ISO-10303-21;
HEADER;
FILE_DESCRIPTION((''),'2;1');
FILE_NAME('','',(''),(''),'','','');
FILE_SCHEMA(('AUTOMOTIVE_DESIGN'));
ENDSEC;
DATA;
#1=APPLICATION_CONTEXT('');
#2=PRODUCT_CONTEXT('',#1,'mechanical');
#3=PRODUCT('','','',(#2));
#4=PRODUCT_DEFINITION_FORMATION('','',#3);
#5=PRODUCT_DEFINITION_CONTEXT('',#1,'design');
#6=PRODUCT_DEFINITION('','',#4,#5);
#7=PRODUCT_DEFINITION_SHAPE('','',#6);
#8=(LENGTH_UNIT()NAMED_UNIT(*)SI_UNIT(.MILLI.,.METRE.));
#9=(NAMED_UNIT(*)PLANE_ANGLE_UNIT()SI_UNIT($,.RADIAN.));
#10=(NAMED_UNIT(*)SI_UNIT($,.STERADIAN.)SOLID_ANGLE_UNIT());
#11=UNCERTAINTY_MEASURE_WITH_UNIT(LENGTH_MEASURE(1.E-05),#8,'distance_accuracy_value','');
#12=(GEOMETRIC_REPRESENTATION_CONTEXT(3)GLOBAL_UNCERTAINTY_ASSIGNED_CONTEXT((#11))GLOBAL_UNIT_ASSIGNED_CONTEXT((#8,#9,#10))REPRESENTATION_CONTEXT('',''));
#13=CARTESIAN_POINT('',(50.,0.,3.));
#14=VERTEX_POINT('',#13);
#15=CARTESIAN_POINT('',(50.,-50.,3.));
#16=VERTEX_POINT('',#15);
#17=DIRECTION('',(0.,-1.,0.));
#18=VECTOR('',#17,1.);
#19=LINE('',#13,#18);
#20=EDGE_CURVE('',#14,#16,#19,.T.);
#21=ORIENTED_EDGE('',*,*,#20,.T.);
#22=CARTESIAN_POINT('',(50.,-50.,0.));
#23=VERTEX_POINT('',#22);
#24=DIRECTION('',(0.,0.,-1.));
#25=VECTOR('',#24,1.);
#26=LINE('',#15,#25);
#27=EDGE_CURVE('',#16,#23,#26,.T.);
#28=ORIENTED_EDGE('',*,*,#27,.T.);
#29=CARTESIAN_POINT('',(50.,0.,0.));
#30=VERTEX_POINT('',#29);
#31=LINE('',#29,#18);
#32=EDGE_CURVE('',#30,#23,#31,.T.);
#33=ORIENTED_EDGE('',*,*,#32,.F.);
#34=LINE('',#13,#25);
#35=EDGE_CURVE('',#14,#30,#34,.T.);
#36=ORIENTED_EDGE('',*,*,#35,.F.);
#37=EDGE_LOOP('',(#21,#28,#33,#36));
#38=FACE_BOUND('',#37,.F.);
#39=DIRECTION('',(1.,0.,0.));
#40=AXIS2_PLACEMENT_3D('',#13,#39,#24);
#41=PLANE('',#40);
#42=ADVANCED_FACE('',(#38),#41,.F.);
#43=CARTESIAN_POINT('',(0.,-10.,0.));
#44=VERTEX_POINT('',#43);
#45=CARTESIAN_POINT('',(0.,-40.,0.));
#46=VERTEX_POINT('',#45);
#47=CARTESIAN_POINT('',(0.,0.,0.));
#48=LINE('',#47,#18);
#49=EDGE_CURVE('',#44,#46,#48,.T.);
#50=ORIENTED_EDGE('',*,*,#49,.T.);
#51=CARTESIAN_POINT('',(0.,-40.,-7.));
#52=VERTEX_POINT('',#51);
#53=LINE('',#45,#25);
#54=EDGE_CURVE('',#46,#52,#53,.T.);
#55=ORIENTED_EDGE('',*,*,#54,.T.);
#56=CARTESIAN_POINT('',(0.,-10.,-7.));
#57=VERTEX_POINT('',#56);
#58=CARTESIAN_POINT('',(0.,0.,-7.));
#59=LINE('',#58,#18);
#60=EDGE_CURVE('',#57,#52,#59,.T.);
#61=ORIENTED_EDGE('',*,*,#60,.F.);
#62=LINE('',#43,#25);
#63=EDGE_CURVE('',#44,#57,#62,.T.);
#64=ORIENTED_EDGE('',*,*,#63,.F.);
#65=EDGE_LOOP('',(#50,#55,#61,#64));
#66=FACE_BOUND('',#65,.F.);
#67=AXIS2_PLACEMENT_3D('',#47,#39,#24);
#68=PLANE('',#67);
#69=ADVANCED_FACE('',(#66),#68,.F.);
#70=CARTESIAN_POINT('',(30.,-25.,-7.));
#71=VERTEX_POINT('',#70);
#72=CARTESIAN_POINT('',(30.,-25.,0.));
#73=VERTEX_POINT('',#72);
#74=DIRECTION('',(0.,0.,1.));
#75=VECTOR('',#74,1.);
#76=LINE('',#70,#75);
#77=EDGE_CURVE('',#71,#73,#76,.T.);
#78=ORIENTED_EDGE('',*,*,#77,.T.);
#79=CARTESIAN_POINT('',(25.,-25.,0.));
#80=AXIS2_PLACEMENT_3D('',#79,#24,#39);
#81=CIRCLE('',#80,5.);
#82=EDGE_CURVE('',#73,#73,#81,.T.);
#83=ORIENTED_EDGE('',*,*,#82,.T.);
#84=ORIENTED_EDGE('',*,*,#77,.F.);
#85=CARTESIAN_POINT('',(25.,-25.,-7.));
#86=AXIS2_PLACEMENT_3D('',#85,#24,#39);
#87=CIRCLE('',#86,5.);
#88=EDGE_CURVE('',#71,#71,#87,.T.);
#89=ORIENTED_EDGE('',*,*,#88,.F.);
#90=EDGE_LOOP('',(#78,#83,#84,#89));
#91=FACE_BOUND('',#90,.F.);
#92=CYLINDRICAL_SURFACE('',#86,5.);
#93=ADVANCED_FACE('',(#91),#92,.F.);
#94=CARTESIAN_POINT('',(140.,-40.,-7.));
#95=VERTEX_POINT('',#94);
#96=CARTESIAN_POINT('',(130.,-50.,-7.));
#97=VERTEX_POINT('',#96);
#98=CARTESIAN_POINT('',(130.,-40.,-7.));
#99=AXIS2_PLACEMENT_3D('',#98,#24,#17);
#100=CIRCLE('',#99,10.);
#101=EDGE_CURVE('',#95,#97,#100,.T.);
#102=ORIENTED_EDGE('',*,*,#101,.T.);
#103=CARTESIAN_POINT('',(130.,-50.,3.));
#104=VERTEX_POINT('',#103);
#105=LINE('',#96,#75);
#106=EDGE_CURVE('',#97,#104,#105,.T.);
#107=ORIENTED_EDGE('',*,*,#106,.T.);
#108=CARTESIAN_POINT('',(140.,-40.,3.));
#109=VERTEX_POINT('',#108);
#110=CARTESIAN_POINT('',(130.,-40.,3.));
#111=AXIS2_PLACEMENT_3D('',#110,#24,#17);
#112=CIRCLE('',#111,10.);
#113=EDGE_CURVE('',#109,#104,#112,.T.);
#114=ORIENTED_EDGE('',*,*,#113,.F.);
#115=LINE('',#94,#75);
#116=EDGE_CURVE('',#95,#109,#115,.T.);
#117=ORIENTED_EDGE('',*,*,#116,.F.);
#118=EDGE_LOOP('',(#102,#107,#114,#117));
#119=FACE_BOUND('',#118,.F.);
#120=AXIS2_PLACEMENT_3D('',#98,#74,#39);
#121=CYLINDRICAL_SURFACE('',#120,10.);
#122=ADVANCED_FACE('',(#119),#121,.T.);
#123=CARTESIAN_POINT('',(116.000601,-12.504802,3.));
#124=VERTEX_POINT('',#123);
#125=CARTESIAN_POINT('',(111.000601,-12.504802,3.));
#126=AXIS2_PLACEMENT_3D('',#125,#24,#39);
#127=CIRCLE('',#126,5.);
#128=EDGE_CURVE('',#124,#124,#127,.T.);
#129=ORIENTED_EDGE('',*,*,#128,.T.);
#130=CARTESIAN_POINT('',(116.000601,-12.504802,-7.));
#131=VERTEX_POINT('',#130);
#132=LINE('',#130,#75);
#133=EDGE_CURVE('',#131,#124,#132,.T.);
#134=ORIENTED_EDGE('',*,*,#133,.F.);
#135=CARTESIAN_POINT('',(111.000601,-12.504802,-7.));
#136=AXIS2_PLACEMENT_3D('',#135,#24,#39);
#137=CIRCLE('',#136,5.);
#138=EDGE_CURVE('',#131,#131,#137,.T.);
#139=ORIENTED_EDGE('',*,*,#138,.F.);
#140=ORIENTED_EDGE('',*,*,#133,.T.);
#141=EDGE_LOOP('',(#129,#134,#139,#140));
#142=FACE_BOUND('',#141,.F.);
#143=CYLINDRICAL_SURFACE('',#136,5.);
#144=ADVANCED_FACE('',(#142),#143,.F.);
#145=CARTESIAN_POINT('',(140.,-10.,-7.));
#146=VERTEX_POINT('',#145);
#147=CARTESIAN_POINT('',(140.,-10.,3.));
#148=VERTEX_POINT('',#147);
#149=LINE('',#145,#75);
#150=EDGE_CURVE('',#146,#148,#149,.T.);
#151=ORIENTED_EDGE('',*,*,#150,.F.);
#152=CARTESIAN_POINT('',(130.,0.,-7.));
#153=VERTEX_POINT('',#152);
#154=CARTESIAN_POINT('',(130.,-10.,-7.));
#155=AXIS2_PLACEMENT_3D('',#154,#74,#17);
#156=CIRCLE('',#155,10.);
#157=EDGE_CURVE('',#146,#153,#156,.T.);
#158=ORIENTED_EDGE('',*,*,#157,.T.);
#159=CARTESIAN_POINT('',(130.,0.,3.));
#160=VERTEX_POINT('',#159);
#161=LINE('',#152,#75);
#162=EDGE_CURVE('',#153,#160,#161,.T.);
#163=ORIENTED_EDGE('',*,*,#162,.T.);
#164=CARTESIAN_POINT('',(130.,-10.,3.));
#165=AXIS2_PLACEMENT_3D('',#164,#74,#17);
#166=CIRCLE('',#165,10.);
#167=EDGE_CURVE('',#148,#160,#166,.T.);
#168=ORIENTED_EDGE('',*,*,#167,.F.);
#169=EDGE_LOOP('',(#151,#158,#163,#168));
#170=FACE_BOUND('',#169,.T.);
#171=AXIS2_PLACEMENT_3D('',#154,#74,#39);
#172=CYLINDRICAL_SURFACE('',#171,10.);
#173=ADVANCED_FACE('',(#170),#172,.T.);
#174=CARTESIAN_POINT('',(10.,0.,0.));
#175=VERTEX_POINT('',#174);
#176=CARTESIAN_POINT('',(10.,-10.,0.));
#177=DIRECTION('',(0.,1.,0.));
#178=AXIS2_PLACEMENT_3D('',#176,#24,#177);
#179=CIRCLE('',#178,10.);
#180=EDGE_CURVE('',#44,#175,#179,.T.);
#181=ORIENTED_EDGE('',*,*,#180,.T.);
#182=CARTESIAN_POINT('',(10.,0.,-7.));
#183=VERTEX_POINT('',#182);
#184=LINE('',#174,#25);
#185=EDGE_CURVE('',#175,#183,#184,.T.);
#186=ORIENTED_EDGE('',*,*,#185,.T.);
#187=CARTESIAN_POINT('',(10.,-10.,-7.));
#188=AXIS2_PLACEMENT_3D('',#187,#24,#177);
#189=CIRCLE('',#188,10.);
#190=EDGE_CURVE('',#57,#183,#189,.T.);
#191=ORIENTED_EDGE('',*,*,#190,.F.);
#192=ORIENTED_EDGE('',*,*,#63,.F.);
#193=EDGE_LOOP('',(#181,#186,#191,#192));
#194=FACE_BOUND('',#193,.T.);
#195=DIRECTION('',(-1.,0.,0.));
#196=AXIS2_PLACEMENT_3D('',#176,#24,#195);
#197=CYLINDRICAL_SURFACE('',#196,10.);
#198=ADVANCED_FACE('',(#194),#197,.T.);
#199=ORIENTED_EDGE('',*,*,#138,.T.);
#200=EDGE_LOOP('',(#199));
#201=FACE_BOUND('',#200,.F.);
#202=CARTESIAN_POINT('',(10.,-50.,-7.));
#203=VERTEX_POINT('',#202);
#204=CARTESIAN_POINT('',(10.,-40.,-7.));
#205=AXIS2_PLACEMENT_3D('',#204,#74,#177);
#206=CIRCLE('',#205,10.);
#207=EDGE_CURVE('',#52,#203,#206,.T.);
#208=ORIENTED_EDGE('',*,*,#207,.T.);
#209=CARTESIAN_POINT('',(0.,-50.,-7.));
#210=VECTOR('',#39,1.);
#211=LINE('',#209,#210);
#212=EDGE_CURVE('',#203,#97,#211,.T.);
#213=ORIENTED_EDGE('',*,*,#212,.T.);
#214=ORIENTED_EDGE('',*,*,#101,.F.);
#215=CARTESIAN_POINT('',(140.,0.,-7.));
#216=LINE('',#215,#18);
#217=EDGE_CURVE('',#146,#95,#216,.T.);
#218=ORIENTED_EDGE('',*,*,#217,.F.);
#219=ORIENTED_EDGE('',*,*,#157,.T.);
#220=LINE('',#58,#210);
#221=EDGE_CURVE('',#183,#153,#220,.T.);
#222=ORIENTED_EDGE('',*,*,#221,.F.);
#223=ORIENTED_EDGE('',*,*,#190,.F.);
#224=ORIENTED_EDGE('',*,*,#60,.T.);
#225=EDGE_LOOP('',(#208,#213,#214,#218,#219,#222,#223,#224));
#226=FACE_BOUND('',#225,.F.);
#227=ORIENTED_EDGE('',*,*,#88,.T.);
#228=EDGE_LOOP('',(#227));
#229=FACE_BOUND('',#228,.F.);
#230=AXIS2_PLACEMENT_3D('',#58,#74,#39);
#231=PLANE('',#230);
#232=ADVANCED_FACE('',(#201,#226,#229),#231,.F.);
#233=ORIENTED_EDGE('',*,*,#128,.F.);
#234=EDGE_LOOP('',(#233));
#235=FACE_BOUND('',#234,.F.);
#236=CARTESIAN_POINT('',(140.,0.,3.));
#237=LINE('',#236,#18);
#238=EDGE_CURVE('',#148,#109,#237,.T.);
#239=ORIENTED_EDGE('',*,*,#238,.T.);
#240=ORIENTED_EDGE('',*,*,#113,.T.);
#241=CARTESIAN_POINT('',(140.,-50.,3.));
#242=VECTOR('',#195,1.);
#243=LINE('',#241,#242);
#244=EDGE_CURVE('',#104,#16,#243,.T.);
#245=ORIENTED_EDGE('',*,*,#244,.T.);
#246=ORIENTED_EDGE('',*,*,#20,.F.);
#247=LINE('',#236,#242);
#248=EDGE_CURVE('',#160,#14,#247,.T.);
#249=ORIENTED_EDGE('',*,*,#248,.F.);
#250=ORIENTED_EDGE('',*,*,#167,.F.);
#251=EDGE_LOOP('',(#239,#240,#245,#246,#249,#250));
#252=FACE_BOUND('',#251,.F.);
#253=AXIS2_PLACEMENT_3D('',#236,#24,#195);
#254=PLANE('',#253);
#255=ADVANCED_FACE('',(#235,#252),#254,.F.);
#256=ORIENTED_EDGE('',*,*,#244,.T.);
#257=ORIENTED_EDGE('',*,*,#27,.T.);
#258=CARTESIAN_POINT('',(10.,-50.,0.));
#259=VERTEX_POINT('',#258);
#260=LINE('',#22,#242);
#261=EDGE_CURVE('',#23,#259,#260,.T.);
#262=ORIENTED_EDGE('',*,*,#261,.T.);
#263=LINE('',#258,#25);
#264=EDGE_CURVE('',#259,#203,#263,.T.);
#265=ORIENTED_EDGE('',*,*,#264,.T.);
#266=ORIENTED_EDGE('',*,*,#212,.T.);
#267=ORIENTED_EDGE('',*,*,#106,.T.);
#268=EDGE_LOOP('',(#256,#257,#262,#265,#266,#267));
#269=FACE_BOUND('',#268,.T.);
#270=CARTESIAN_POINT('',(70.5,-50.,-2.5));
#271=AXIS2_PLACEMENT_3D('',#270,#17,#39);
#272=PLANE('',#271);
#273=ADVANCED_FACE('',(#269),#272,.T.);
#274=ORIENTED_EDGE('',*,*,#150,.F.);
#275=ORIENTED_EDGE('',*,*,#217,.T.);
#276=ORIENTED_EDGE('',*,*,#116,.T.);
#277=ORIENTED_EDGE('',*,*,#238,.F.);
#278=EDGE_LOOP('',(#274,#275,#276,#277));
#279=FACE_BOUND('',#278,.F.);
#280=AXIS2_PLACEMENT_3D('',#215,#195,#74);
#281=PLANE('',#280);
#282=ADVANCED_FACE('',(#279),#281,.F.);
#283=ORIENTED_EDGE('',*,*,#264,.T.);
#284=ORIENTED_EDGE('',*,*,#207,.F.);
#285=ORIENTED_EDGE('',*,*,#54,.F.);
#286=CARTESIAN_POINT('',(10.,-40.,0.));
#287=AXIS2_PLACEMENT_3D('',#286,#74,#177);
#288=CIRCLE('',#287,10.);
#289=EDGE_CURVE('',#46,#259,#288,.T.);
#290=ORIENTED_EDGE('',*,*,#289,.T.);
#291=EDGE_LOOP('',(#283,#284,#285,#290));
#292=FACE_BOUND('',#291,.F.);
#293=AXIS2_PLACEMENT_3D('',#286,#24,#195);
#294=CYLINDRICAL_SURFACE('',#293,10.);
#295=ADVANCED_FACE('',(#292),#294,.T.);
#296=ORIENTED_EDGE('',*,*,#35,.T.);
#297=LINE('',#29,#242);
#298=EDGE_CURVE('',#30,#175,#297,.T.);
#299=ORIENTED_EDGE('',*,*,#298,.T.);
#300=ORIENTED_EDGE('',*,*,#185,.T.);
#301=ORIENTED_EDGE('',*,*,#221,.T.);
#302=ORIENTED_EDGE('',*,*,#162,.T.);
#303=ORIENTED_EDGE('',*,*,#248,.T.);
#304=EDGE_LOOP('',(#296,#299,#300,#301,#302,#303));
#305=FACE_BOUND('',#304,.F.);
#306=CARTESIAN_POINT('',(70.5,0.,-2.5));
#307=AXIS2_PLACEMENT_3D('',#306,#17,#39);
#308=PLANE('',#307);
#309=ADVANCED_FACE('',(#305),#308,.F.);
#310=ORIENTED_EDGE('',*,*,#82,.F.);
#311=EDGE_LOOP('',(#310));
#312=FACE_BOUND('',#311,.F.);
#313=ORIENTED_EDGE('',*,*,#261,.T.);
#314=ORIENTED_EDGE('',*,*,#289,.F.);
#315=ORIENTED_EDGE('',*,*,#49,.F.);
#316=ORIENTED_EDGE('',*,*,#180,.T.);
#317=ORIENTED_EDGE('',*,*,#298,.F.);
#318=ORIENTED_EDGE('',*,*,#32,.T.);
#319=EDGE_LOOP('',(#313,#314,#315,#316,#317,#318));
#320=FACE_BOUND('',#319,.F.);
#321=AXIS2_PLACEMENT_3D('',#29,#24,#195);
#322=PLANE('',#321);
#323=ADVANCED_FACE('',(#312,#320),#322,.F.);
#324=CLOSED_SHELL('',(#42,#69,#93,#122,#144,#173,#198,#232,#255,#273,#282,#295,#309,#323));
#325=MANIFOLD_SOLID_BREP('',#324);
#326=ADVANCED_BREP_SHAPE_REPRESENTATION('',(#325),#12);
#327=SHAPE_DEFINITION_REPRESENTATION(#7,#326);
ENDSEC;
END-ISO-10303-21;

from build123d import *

# Parameters (mm, degrees)
F1_DEPTH = 50
F2_R     = 10
F3_R     = 5
F4_DEPTH = 25


# Not quite as in the source:
# - a feature of the source that left no trace in its solid (it failed there, or was rolled back) is left out


with BuildPart() as f1:
    # F0 (on Front) → F1 (new body)
    with BuildSketch(Plane.XZ):
        Polygon((50, 0), (0, 0), (0, -7), (140, -7), (140, 3), (50, 3), align=None)
    extrude(amount=F1_DEPTH)

    # F2
    f2_edges = [f1.edges().sort_by_distance(p)[0] for p in [
        (0, -50, -3.5),
        (0, 0, -3.5),
        (140, 0, -2),
        (140, -50, -2),
    ]]
    fillet(f2_edges, radius=F2_R)

    # F3 (on face) → F4 (cut)
    with BuildSketch(Plane(origin=(0, 0, -7), x_dir=(1, 0, 0), z_dir=(0, 0, -1))):
        with Locations((25, 25)):
            Circle(F3_R)
        with Locations((111.0006011832, 12.5048019411)):
            Circle(F3_R)
    extrude(amount=-F4_DEPTH, mode=Mode.SUBTRACT)


solid = f1.part
